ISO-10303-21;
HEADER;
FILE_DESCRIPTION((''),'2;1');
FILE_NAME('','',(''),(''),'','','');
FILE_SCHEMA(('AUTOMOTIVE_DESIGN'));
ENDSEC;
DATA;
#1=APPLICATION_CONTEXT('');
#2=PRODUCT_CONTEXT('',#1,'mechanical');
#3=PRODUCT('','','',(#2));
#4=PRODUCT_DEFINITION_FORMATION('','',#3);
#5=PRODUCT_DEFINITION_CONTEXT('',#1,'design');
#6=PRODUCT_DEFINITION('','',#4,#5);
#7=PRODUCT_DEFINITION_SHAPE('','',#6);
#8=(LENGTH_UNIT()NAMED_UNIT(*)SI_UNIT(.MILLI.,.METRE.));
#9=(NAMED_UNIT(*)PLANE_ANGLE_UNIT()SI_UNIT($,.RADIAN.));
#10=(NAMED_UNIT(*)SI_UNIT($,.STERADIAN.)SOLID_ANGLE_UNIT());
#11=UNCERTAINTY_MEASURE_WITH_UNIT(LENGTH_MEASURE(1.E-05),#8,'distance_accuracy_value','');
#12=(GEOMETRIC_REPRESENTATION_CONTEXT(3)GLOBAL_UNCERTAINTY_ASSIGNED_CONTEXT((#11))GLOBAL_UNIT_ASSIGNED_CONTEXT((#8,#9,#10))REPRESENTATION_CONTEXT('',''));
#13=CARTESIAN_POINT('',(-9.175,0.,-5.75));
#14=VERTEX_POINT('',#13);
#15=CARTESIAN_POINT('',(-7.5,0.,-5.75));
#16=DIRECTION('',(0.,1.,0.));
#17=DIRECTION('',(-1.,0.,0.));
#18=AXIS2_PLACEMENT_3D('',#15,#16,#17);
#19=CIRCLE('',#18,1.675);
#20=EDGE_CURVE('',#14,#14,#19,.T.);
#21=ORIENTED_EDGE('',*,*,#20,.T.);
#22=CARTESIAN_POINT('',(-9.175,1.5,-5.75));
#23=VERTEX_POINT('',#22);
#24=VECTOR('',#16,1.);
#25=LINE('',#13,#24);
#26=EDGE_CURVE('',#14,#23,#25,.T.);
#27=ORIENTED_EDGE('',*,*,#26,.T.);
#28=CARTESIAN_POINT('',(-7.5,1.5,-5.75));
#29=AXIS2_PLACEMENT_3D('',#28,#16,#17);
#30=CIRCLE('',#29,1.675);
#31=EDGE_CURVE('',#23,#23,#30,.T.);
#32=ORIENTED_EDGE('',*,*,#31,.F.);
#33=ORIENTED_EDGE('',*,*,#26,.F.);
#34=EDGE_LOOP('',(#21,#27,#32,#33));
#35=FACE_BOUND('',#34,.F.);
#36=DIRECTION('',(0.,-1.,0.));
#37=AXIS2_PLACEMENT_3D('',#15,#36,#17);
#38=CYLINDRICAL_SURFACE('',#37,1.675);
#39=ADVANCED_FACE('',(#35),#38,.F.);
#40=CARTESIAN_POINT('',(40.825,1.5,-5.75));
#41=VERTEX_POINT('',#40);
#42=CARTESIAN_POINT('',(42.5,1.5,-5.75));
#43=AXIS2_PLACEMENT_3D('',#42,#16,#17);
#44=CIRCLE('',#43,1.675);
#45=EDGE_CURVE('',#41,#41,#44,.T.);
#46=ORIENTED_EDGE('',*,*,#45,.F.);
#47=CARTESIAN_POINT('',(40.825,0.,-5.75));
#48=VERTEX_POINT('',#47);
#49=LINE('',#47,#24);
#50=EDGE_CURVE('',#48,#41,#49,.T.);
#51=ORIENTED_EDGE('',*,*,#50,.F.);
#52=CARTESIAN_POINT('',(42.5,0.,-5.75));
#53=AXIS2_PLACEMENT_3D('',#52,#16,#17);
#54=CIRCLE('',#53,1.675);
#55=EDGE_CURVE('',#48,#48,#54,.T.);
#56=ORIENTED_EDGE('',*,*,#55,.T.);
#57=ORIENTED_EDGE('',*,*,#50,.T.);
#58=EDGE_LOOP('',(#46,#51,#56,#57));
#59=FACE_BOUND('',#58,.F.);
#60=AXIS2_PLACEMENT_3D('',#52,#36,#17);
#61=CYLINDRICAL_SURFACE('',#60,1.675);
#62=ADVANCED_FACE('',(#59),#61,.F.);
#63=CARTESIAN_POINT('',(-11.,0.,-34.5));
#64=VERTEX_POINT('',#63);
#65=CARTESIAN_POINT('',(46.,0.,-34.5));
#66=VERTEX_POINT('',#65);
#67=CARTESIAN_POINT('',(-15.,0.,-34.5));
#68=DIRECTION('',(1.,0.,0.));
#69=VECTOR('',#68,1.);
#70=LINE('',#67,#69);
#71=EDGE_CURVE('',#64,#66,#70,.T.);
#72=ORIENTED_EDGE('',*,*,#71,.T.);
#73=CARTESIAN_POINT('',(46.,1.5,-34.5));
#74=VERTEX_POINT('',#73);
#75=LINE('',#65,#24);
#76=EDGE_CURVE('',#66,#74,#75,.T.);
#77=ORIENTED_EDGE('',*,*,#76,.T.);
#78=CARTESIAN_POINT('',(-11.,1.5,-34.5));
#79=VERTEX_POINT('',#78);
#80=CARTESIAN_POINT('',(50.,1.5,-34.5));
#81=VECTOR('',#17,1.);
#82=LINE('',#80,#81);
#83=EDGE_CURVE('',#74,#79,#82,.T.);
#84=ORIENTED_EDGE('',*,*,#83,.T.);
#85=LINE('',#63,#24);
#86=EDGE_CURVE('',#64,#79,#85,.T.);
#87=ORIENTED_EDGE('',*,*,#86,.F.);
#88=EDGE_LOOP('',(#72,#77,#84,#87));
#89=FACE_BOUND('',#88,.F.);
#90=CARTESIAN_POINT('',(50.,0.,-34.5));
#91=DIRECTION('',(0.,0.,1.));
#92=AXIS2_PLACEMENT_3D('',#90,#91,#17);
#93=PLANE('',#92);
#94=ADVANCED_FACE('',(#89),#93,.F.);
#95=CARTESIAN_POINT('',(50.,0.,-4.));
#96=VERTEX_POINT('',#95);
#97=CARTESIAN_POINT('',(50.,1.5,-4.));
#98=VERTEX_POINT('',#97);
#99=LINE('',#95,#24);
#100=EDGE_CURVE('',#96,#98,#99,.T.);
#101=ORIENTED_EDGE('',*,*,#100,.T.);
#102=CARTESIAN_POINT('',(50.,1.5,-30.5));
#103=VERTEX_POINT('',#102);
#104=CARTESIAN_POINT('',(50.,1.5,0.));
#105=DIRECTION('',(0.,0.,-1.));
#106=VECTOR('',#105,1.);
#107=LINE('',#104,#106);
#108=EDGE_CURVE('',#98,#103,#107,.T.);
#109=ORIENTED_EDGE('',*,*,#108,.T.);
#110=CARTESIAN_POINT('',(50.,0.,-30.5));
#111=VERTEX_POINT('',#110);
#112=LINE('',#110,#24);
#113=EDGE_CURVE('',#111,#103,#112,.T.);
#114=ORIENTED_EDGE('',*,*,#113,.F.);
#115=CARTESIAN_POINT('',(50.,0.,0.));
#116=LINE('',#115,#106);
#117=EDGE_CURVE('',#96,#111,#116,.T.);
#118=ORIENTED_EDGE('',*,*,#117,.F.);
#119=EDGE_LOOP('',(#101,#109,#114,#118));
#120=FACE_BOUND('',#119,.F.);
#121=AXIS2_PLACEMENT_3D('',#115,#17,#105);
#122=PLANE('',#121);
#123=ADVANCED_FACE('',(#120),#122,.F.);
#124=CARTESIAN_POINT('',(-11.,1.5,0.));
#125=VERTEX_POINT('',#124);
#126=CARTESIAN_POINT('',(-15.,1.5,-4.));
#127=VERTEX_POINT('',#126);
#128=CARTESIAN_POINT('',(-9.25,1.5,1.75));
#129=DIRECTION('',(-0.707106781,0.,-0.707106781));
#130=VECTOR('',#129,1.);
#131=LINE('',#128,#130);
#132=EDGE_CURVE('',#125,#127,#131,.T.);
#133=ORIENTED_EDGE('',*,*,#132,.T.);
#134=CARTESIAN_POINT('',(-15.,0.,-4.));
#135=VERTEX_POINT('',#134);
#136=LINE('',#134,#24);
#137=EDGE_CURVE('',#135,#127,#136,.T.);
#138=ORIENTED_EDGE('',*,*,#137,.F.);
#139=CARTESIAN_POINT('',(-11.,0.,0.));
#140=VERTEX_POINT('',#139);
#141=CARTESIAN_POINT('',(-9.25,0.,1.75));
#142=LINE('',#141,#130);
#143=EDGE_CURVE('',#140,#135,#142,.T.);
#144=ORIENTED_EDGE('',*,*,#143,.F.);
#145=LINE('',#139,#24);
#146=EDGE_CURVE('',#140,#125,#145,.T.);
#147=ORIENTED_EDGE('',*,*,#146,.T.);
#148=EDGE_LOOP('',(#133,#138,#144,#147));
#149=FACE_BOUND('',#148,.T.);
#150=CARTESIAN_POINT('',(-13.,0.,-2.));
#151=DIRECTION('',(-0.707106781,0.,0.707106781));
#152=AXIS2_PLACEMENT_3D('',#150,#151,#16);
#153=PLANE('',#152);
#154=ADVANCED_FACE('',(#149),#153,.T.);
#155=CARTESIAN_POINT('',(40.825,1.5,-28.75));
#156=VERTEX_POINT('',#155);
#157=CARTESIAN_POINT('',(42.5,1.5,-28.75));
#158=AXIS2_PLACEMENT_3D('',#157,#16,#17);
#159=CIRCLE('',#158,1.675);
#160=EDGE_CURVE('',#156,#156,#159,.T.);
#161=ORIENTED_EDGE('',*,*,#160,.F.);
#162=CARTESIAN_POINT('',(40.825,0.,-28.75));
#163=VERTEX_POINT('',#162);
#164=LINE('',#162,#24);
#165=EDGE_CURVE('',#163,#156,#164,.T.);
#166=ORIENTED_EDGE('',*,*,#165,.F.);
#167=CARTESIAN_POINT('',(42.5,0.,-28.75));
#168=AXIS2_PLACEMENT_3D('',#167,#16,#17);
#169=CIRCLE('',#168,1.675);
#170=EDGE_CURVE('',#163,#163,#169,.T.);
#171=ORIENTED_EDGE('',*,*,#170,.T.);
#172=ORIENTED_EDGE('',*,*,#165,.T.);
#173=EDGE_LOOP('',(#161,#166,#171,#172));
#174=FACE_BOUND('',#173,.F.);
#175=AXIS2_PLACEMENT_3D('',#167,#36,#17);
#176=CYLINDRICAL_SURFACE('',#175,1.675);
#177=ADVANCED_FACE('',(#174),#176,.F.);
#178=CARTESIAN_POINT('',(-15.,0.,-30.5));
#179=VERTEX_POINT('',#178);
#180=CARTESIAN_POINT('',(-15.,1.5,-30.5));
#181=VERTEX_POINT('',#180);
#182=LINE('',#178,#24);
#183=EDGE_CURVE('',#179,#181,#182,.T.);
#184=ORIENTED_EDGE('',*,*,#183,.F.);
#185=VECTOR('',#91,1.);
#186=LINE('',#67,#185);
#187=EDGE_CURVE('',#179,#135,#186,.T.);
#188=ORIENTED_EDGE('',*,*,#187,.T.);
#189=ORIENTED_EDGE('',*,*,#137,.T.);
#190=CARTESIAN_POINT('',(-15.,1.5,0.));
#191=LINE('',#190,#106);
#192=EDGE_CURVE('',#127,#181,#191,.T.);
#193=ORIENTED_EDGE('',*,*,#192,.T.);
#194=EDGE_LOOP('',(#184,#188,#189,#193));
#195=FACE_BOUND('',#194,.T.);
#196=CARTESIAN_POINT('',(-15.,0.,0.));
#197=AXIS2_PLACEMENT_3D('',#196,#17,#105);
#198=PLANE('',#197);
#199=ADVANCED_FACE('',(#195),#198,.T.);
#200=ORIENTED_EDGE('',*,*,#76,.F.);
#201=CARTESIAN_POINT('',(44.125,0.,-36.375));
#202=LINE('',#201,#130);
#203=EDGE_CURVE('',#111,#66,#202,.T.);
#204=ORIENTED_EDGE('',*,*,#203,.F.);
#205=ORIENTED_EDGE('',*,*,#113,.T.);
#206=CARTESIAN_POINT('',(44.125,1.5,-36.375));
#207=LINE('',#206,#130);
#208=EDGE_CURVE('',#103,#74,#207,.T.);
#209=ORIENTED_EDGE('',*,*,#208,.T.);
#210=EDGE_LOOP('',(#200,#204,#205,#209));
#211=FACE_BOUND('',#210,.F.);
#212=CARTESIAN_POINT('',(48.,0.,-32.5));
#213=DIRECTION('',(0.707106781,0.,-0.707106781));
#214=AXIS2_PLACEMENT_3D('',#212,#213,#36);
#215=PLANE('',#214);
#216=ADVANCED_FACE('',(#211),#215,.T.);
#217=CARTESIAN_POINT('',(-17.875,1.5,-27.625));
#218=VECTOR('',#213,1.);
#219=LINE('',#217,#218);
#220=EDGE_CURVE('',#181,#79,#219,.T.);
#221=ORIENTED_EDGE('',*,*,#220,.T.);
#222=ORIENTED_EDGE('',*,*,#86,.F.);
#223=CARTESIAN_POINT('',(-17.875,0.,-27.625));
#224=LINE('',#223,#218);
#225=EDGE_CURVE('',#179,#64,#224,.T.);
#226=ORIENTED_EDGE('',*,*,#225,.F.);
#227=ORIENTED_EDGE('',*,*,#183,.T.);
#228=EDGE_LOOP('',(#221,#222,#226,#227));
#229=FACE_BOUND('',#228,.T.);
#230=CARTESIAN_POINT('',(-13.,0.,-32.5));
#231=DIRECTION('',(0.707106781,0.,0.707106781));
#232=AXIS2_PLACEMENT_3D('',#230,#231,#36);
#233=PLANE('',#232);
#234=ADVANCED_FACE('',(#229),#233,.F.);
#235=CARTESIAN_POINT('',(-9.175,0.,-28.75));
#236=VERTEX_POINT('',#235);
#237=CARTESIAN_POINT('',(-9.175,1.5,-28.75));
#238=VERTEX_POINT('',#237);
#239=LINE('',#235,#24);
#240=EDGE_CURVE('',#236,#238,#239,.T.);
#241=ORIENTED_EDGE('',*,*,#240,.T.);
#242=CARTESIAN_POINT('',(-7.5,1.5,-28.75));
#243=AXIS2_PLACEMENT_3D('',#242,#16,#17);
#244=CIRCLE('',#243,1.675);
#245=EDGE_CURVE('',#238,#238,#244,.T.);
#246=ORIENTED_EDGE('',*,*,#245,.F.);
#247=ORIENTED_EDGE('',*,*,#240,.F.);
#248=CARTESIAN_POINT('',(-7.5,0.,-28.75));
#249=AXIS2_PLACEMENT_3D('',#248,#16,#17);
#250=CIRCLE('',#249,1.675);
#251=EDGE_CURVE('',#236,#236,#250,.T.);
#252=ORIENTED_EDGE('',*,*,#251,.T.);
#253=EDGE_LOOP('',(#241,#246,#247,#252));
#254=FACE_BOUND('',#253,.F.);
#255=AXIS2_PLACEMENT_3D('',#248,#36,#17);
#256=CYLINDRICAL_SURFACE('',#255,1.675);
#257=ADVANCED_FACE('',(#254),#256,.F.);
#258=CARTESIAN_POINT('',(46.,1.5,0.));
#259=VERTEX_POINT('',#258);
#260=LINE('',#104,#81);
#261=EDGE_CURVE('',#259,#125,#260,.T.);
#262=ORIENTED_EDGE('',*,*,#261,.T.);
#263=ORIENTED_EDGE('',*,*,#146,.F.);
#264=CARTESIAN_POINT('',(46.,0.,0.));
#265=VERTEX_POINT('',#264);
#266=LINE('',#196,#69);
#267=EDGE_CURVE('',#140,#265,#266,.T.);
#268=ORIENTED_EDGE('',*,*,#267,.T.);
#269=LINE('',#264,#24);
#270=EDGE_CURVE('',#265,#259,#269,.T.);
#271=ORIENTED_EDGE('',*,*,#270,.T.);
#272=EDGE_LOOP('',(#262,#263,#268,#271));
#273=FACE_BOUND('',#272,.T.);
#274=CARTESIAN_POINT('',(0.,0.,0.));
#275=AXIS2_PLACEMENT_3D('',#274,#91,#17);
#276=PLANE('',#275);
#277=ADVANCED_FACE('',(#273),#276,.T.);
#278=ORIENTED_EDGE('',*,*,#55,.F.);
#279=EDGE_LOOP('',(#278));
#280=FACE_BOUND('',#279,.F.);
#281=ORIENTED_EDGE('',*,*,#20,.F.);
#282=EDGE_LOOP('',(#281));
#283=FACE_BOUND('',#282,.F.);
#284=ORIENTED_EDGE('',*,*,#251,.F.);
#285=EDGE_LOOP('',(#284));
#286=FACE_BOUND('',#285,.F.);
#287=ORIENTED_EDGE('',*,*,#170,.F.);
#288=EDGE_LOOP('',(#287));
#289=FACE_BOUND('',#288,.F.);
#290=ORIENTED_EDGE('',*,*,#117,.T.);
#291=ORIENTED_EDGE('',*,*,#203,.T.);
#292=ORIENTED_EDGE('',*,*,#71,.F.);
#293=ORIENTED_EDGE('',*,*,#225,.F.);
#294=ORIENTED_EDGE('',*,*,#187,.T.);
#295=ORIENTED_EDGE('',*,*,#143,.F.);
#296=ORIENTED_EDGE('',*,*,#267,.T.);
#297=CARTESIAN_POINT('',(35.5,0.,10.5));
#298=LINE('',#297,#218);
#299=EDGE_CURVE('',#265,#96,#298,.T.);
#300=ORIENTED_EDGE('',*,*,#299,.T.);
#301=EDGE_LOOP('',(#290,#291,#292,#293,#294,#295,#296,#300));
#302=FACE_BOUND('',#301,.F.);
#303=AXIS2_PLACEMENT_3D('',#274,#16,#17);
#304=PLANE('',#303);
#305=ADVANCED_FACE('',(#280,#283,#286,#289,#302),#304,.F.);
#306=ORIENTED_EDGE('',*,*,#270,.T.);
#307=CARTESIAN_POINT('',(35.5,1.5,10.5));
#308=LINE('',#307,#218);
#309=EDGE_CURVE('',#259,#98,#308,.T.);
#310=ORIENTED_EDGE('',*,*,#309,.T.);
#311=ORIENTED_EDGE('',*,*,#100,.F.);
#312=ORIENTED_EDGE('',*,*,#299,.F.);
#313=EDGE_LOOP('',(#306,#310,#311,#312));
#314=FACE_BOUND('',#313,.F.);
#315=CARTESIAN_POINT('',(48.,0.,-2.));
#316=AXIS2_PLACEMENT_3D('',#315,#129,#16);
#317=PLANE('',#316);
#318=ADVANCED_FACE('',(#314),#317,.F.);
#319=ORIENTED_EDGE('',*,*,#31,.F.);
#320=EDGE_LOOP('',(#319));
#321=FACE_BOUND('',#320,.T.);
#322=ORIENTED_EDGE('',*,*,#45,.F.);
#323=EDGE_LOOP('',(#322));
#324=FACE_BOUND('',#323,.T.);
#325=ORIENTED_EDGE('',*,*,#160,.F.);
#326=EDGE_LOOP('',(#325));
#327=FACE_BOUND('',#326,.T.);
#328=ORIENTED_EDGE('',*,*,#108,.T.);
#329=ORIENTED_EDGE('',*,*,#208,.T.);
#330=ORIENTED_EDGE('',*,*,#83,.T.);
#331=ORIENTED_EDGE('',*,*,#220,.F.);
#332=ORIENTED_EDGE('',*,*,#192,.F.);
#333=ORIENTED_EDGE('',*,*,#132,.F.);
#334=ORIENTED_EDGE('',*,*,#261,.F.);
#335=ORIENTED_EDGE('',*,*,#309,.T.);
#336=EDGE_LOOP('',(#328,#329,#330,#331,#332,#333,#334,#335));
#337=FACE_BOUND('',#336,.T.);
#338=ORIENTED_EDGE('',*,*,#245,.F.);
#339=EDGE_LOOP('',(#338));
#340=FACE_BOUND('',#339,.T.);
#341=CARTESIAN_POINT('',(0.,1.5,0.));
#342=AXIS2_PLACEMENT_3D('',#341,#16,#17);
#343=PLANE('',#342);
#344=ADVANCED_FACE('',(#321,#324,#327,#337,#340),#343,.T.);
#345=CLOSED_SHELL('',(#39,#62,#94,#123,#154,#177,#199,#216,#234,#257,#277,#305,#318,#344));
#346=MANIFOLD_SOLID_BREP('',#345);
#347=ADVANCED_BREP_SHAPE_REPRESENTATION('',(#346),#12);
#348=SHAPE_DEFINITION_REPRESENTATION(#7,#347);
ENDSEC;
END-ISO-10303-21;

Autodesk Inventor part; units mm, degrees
ref_plane "YZ Plane" through (0, 0, 0) normal (1, 0, 0) x (0, 1, 0)
ref_plane "XZ Plane" through (0, 0, 0) normal (0, 1, 0) x (-1, 0, 0)
ref_plane "XY Plane" through (0, 0, 0) normal (0, 0, 1) x (1, 0, 0)
sketch "Sketch1" plane through (0, 0, 0) normal (0, 1, 0) x (-1, 0, 0)
  line L0 (0, 0) -> (15, 0)
  line L1 (15, 0) -> (15, -34.5)
  line L2 (15, -34.5) -> (0, -34.5)
  line L3 (0, -34.5) -> (0, 0)
  line L4 (0, -17.25) -> (15, -17.25)
  circle A0 centre (7.5, -5.75) radius 1.675
  circle A1 centre (7.5, -28.75) radius 1.675
  circle A2 centre (-42.5, -5.75) radius 1.675
  line L5 (15, 0) -> (-50, 0)
  line L6 (-50, 0) -> (-50, -34.5)
  line L7 (-50, -34.5) -> (15, -34.5)
  line L8 (15, -34.5) -> (15, 0)
  circle A3 centre (-42.5, -28.75) radius 1.675
  point P0 (0, -34.5)
  dimension "d0" = 34.5
  dimension "d1" = 15
  dimension "d2" = 3.35
  dimension "d3" = 7.5
  dimension "d4" = 11.5
  dimension "d9" = 3.35
  dimension "d10" = 50
  dimension "d11" = 7.5
  dimension "d12" = 5.75
extrude "Plate1" add sketch "Sketch1" along normal blind 1.5
chamfer "Corner Chamfer1" distance 4 angle 45 4 edges at (-15, 0.75, 0) (-15, 0.75, -34.5) (50, 0.75, 0) (50, 0.75, -34.5)
equation "\"d0\" = 0.75 * A_width"
equation "\"d2\" = rivet_diameter"
equation "\"d3\" = 0.5 * d1"
equation "\"d4\" = 0.25 * A_width"
equation "\"d9\" = rivet_diameter"
equation "\"d5\" = Thickness"
equation "\"Thickness\" = thin_plate"
equation "\"BendRadius\" = Thickness"
equation "\"BendReliefWidth\" = Thickness"
equation "\"BendReliefDepth\" = 0.5 * Thickness"
equation "\"CornerReliefSize\" = 4 * Thickness"
equation "\"MinimumRemnant\" = 2 * Thickness"
equation "\"TransitionRadius\" = BendRadius"
equation "\"JacobiRadiusSize\" = BendRadius"
equation "\"GapSize\" = Thickness"
equation "\"A_width\" = 46"
equation "\"A_joint_diameter\" = 16"
equation "\"A_joint_tolerance\" = 3"
equation "\"l___________\" = 0"
equation "\"l__________\" = 0"
equation "\"l_________\" = 0"
equation "\"rivet_diameter\" = 3.35"
equation "\"plate_thickness\" = 3"
equation "\"l________\" = 0"
equation "\"A_B_spacing\" = 2"
equation "\"L_Piston_Bottom\" = 21"
equation "\"L_Piston_Top\" = 25"
equation "\"thin_plate\" = 1.5"
properties part number "A1_joiners" material "Stainless Steel"
